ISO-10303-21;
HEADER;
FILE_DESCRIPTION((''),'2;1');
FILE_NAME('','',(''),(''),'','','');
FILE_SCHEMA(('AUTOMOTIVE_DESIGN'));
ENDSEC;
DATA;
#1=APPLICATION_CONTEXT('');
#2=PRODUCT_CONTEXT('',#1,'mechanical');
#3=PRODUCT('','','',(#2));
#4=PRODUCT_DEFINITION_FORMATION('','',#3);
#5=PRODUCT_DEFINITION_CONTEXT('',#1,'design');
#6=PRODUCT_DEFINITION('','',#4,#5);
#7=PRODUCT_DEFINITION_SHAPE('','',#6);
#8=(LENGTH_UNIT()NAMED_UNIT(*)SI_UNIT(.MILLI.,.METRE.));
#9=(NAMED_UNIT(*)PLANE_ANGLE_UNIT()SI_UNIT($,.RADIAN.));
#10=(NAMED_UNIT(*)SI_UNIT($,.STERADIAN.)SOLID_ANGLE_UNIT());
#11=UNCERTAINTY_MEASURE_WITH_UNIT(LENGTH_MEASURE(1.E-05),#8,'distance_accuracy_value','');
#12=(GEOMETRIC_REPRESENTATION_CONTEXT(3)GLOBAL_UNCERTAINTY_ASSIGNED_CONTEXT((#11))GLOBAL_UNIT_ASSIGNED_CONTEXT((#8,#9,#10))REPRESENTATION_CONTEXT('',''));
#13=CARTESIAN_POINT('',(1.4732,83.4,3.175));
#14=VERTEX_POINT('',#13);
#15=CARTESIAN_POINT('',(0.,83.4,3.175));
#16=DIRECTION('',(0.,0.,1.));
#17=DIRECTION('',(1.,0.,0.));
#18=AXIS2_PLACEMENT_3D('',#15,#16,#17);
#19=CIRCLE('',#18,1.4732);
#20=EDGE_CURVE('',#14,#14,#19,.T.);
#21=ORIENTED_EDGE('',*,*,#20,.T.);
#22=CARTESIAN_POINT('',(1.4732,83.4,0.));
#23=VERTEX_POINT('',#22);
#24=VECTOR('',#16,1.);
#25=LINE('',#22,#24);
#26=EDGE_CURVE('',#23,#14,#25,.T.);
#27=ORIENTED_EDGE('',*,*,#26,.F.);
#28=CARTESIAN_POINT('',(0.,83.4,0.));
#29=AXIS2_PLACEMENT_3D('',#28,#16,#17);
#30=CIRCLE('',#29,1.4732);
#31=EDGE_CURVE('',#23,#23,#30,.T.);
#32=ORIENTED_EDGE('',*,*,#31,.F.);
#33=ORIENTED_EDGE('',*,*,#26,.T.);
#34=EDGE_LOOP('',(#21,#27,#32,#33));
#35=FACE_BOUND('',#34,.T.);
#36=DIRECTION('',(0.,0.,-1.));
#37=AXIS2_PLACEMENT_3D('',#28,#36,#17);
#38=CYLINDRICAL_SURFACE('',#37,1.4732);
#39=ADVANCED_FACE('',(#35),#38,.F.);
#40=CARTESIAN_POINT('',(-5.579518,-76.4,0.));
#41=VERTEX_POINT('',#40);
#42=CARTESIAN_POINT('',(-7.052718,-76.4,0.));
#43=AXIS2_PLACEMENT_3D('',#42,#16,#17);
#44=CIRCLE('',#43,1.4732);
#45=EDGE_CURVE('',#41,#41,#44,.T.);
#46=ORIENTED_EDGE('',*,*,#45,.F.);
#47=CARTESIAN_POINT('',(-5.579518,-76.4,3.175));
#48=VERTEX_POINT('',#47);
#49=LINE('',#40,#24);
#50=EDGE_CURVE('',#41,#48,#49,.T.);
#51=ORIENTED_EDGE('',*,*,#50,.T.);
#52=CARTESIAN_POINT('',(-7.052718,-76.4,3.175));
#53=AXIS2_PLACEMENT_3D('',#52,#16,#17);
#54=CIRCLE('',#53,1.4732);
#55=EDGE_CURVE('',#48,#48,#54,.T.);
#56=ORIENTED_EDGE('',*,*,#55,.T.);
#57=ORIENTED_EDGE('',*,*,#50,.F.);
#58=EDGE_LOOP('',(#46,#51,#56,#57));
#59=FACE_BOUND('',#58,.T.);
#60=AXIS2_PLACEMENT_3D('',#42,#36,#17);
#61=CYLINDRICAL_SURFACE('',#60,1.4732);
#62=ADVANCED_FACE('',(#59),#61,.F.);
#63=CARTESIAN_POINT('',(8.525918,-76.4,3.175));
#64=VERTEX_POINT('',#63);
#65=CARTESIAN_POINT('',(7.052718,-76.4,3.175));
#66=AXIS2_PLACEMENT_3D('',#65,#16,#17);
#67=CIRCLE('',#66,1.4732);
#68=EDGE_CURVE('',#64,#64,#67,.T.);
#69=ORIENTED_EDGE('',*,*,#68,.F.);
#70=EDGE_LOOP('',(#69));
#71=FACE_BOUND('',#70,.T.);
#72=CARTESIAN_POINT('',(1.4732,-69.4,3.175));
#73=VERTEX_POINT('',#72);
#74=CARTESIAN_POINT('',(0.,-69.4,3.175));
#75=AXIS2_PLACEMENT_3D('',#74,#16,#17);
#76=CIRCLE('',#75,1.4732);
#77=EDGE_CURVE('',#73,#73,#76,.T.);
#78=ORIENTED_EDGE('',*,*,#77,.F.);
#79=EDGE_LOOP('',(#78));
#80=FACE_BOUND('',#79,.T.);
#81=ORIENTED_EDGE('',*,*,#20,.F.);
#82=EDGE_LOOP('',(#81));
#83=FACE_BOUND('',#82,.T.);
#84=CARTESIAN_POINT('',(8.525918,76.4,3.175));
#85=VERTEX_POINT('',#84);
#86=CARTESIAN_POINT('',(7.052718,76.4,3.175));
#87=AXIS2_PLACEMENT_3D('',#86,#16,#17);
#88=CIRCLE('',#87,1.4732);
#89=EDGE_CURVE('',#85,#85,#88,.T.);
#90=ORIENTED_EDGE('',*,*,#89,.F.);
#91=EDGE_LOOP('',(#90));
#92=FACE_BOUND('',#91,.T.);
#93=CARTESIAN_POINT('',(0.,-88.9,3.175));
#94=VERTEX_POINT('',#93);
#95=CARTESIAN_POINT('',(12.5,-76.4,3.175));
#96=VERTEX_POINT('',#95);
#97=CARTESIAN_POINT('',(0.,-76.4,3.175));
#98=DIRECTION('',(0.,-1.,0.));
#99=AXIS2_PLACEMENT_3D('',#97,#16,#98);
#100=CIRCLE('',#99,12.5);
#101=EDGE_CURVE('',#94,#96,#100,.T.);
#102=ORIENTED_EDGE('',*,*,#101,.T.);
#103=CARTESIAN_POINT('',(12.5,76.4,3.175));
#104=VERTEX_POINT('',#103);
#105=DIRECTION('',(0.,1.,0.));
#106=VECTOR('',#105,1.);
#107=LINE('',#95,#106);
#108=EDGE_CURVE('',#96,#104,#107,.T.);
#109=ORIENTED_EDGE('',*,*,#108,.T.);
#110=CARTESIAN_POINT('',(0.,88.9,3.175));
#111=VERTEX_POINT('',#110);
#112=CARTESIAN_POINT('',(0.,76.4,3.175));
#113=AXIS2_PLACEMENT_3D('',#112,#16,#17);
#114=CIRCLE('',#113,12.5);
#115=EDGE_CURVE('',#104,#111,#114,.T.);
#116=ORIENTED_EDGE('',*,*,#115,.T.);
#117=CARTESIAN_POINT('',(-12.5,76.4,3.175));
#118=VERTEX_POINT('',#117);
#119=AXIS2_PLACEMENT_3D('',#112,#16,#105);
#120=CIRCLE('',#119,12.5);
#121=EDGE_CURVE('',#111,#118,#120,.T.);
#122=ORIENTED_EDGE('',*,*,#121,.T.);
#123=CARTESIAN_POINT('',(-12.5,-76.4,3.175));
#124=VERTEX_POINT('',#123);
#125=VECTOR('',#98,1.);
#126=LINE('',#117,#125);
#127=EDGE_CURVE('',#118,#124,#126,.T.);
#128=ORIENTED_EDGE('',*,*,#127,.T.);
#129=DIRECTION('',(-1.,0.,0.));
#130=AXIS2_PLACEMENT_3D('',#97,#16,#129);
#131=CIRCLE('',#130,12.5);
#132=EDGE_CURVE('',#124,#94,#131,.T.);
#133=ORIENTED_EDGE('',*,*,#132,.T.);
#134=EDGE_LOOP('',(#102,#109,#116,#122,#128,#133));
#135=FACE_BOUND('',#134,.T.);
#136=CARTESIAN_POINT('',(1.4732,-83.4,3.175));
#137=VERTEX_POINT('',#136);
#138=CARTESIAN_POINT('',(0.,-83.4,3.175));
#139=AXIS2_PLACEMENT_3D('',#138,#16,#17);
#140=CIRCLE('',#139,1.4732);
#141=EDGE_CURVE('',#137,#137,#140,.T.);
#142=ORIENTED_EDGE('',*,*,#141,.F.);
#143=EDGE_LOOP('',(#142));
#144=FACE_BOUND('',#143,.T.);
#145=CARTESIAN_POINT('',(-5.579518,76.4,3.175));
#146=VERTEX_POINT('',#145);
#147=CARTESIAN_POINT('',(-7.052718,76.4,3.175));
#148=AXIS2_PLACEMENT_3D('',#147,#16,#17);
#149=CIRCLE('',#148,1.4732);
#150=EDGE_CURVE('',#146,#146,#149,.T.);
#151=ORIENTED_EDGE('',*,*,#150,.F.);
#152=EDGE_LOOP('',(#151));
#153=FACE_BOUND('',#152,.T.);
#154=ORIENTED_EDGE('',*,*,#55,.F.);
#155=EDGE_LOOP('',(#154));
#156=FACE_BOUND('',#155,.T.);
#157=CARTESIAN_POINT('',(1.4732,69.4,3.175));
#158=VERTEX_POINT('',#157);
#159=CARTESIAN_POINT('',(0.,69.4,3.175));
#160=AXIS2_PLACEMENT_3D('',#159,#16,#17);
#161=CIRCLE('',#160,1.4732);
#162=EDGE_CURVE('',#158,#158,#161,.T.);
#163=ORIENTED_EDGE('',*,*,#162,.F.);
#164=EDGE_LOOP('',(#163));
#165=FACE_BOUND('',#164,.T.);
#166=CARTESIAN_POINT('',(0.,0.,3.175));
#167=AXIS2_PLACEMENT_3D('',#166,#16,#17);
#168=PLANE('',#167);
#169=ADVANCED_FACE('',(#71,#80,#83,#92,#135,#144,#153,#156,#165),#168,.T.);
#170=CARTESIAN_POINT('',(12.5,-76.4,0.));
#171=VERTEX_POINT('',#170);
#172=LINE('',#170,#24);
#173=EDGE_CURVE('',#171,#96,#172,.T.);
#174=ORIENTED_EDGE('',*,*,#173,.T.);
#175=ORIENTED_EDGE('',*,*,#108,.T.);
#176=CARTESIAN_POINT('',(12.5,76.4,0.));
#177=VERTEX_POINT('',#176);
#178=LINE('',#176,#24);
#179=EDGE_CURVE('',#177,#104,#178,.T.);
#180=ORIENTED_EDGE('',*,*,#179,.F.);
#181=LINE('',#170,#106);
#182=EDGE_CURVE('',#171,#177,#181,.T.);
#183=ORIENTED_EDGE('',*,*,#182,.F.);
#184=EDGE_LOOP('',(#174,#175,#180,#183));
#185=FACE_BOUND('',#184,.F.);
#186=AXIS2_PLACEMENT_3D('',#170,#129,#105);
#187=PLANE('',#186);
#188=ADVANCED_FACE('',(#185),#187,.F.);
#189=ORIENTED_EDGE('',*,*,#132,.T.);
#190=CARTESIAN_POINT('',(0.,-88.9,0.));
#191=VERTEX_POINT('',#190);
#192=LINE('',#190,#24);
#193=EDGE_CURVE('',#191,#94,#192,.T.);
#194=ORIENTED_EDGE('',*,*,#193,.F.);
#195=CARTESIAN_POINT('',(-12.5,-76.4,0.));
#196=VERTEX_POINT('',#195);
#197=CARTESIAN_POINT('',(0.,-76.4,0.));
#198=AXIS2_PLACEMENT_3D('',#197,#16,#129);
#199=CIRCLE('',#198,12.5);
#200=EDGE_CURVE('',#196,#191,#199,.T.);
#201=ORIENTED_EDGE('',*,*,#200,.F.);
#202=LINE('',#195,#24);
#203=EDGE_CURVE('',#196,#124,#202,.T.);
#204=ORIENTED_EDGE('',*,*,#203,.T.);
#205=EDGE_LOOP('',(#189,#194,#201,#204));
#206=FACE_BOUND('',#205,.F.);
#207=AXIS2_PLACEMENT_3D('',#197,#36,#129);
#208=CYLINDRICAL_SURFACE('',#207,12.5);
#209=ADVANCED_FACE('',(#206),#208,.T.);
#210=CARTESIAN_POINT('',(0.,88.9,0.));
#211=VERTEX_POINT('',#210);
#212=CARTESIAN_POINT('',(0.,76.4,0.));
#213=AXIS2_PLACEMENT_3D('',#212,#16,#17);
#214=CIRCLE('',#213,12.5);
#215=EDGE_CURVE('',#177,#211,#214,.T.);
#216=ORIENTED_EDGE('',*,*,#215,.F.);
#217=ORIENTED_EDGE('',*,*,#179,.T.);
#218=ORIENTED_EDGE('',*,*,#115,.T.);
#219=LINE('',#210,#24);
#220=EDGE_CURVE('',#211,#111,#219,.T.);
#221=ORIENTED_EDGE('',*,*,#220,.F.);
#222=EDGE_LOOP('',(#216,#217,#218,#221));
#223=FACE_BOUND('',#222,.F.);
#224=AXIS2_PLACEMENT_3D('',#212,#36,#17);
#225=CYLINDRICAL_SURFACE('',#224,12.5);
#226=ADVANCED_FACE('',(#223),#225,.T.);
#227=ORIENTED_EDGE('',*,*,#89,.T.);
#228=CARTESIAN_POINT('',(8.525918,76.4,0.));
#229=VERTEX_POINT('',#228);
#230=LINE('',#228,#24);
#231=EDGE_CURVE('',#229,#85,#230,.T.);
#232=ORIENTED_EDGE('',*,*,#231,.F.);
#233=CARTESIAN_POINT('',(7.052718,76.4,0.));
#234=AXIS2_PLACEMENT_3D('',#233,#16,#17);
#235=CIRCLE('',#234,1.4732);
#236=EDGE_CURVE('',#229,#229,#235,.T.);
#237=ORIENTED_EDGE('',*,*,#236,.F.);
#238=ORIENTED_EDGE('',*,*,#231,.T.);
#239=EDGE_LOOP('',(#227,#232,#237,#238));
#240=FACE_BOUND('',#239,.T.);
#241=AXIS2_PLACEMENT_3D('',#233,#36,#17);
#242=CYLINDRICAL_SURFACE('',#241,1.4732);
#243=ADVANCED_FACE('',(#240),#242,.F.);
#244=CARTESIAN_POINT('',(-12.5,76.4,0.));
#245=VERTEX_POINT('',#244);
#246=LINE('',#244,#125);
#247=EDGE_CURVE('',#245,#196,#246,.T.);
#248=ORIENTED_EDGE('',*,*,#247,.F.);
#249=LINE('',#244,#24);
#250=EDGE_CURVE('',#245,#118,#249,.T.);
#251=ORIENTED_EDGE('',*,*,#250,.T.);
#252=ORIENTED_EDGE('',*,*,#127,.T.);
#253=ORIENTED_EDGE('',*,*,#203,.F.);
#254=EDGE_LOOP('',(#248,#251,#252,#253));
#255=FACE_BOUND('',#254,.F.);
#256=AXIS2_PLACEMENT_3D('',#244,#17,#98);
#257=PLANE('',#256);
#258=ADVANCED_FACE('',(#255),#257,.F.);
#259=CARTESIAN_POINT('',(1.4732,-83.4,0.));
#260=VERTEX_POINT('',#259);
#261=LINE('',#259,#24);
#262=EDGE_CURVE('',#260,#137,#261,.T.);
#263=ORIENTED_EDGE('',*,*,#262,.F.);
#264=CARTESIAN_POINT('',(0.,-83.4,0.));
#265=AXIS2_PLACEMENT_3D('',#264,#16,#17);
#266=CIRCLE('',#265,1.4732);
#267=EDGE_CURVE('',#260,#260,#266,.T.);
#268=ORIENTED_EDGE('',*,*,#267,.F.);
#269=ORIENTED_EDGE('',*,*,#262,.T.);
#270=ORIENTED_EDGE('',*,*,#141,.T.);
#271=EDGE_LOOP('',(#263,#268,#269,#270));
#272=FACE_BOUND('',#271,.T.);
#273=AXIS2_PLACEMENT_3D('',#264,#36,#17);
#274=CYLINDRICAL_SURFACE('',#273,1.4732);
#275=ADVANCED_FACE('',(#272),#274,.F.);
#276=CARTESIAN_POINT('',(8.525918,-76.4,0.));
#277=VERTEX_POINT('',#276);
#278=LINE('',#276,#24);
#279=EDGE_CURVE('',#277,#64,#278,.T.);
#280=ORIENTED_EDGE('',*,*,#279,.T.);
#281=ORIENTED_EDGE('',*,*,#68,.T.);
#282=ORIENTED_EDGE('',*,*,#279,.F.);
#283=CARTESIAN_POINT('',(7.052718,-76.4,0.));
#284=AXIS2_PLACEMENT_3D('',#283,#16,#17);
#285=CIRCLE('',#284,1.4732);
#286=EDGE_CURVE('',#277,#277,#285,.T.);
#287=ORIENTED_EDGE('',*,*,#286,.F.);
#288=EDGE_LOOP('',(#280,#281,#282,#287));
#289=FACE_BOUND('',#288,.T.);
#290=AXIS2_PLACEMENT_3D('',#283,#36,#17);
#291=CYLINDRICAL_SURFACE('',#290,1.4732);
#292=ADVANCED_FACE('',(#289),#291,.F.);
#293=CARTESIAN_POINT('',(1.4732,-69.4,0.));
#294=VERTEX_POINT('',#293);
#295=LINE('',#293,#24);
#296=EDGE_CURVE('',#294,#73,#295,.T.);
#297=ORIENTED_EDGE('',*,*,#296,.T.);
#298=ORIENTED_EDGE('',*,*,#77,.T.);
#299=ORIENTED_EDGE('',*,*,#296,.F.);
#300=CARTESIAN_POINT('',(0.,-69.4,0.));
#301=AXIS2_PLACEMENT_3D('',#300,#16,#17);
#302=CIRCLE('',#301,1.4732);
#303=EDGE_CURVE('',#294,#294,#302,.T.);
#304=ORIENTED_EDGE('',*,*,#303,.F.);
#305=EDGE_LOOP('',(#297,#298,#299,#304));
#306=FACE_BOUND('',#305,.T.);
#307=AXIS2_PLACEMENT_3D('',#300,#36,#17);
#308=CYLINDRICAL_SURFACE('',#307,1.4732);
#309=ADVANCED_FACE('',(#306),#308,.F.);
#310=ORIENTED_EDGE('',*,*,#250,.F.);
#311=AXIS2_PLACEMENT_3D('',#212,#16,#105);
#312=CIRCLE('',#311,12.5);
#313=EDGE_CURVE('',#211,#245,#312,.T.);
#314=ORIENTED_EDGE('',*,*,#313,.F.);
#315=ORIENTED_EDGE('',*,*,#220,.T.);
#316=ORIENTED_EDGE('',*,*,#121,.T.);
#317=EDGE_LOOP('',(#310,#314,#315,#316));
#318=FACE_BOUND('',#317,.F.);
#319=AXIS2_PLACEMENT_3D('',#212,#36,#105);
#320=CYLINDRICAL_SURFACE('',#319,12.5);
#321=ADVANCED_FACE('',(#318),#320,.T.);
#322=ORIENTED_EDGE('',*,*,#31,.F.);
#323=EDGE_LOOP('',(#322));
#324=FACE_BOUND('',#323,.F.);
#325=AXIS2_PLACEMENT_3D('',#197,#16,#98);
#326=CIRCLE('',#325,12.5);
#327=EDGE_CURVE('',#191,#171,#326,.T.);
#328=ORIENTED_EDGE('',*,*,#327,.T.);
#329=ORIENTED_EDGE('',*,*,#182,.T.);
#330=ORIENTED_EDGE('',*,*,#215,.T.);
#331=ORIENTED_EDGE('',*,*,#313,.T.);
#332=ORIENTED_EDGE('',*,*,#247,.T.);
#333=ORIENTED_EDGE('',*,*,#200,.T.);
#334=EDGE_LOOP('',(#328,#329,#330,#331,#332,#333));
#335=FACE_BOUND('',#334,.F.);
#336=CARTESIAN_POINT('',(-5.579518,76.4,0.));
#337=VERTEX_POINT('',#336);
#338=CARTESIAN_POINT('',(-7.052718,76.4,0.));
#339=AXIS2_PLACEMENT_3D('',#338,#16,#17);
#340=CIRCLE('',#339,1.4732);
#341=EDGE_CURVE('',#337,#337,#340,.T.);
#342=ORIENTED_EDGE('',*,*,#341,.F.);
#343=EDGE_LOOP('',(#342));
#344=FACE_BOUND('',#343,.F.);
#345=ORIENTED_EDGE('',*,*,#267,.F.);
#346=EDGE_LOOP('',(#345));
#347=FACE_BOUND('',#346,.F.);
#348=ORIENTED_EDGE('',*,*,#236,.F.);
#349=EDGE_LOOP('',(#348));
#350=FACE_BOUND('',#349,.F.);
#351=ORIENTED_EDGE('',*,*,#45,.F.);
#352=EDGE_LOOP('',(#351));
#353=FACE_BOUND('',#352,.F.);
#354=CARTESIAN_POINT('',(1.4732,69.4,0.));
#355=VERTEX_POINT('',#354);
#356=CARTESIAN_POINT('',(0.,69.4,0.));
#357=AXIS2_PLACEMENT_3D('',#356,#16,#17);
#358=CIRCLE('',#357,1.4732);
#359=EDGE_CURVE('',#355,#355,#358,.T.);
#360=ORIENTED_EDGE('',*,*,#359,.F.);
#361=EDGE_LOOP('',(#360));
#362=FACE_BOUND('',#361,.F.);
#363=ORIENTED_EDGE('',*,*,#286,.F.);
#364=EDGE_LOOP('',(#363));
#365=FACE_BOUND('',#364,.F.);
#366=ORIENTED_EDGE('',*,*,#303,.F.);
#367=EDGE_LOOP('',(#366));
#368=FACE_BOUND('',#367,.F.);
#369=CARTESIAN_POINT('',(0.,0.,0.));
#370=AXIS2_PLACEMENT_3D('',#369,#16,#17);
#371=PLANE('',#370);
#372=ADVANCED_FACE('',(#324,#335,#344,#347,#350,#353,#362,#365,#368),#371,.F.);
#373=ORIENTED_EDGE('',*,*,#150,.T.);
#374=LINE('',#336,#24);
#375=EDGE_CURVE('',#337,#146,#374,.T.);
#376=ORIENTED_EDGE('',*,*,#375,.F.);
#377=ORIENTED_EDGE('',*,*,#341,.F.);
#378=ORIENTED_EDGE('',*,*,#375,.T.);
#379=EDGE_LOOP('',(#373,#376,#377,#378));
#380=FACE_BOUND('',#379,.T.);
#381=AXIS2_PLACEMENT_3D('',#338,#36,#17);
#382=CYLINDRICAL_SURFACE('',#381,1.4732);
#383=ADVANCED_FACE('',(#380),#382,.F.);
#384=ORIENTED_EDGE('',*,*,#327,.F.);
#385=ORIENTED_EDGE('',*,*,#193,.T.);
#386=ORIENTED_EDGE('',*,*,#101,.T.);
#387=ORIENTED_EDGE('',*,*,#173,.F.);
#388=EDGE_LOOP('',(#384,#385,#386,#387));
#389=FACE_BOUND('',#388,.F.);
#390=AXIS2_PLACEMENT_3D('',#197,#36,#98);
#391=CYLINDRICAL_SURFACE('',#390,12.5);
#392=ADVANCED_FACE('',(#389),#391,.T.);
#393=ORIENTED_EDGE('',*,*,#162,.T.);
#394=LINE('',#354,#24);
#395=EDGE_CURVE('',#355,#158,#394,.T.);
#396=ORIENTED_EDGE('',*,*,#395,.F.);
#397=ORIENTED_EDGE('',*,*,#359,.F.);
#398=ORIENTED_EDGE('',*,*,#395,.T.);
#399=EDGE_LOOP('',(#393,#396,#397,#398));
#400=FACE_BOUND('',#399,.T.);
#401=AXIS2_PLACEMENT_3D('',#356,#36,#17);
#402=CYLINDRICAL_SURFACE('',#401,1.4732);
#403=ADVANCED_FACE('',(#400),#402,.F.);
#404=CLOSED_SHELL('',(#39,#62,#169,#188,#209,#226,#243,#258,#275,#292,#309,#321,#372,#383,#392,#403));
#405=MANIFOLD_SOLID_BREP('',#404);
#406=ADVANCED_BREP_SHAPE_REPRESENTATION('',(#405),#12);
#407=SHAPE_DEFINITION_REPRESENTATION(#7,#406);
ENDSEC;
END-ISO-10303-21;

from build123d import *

# Parameters (mm, degrees)
F0_R     = 1.4732
F1_DEPTH = 3.175


# Not quite as in the source:
# - a length typed as a fraction of an inch, garbled in the dataset ("3 / 203.2 mm" for 3/8 in), is restored


with BuildPart() as f1:
    # F0 (on Top) → F1 (new body)
    with BuildSketch(Plane.XY):
        with BuildLine():
            Line((12.5, -76.4), (12.5, 76.4))
            ThreePointArc((12.5, 76.4), (8.8388347648, 85.2388347648), (0, 88.9))
            ThreePointArc((0, 88.9), (-8.8388347648, 85.2388347648), (-12.5, 76.4))
            Line((-12.5, 76.4), (-12.5, -76.4))
            ThreePointArc((-12.5, -76.4), (-8.8388347648, -85.2388347648), (0, -88.9))
            ThreePointArc((0, -88.9), (8.8388347648, -85.2388347648), (12.5, -76.4))
        make_face()
        with Locations((-7.0527177304, -76.4)):
            Circle(F0_R, mode=Mode.SUBTRACT)
        with Locations((0, -83.4)):
            Circle(F0_R, mode=Mode.SUBTRACT)
        with Locations((0, -69.4)):
            Circle(F0_R, mode=Mode.SUBTRACT)
        with Locations((7.0527177304, -76.4)):
            Circle(F0_R, mode=Mode.SUBTRACT)
        with Locations((-7.0527177304, 76.4)):
            Circle(F0_R, mode=Mode.SUBTRACT)
        with Locations((0, 69.4)):
            Circle(F0_R, mode=Mode.SUBTRACT)
        with Locations((0, 83.4)):
            Circle(F0_R, mode=Mode.SUBTRACT)
        with Locations((7.0527177304, 76.4)):
            Circle(F0_R, mode=Mode.SUBTRACT)
    extrude(amount=F1_DEPTH)


solid = f1.part
